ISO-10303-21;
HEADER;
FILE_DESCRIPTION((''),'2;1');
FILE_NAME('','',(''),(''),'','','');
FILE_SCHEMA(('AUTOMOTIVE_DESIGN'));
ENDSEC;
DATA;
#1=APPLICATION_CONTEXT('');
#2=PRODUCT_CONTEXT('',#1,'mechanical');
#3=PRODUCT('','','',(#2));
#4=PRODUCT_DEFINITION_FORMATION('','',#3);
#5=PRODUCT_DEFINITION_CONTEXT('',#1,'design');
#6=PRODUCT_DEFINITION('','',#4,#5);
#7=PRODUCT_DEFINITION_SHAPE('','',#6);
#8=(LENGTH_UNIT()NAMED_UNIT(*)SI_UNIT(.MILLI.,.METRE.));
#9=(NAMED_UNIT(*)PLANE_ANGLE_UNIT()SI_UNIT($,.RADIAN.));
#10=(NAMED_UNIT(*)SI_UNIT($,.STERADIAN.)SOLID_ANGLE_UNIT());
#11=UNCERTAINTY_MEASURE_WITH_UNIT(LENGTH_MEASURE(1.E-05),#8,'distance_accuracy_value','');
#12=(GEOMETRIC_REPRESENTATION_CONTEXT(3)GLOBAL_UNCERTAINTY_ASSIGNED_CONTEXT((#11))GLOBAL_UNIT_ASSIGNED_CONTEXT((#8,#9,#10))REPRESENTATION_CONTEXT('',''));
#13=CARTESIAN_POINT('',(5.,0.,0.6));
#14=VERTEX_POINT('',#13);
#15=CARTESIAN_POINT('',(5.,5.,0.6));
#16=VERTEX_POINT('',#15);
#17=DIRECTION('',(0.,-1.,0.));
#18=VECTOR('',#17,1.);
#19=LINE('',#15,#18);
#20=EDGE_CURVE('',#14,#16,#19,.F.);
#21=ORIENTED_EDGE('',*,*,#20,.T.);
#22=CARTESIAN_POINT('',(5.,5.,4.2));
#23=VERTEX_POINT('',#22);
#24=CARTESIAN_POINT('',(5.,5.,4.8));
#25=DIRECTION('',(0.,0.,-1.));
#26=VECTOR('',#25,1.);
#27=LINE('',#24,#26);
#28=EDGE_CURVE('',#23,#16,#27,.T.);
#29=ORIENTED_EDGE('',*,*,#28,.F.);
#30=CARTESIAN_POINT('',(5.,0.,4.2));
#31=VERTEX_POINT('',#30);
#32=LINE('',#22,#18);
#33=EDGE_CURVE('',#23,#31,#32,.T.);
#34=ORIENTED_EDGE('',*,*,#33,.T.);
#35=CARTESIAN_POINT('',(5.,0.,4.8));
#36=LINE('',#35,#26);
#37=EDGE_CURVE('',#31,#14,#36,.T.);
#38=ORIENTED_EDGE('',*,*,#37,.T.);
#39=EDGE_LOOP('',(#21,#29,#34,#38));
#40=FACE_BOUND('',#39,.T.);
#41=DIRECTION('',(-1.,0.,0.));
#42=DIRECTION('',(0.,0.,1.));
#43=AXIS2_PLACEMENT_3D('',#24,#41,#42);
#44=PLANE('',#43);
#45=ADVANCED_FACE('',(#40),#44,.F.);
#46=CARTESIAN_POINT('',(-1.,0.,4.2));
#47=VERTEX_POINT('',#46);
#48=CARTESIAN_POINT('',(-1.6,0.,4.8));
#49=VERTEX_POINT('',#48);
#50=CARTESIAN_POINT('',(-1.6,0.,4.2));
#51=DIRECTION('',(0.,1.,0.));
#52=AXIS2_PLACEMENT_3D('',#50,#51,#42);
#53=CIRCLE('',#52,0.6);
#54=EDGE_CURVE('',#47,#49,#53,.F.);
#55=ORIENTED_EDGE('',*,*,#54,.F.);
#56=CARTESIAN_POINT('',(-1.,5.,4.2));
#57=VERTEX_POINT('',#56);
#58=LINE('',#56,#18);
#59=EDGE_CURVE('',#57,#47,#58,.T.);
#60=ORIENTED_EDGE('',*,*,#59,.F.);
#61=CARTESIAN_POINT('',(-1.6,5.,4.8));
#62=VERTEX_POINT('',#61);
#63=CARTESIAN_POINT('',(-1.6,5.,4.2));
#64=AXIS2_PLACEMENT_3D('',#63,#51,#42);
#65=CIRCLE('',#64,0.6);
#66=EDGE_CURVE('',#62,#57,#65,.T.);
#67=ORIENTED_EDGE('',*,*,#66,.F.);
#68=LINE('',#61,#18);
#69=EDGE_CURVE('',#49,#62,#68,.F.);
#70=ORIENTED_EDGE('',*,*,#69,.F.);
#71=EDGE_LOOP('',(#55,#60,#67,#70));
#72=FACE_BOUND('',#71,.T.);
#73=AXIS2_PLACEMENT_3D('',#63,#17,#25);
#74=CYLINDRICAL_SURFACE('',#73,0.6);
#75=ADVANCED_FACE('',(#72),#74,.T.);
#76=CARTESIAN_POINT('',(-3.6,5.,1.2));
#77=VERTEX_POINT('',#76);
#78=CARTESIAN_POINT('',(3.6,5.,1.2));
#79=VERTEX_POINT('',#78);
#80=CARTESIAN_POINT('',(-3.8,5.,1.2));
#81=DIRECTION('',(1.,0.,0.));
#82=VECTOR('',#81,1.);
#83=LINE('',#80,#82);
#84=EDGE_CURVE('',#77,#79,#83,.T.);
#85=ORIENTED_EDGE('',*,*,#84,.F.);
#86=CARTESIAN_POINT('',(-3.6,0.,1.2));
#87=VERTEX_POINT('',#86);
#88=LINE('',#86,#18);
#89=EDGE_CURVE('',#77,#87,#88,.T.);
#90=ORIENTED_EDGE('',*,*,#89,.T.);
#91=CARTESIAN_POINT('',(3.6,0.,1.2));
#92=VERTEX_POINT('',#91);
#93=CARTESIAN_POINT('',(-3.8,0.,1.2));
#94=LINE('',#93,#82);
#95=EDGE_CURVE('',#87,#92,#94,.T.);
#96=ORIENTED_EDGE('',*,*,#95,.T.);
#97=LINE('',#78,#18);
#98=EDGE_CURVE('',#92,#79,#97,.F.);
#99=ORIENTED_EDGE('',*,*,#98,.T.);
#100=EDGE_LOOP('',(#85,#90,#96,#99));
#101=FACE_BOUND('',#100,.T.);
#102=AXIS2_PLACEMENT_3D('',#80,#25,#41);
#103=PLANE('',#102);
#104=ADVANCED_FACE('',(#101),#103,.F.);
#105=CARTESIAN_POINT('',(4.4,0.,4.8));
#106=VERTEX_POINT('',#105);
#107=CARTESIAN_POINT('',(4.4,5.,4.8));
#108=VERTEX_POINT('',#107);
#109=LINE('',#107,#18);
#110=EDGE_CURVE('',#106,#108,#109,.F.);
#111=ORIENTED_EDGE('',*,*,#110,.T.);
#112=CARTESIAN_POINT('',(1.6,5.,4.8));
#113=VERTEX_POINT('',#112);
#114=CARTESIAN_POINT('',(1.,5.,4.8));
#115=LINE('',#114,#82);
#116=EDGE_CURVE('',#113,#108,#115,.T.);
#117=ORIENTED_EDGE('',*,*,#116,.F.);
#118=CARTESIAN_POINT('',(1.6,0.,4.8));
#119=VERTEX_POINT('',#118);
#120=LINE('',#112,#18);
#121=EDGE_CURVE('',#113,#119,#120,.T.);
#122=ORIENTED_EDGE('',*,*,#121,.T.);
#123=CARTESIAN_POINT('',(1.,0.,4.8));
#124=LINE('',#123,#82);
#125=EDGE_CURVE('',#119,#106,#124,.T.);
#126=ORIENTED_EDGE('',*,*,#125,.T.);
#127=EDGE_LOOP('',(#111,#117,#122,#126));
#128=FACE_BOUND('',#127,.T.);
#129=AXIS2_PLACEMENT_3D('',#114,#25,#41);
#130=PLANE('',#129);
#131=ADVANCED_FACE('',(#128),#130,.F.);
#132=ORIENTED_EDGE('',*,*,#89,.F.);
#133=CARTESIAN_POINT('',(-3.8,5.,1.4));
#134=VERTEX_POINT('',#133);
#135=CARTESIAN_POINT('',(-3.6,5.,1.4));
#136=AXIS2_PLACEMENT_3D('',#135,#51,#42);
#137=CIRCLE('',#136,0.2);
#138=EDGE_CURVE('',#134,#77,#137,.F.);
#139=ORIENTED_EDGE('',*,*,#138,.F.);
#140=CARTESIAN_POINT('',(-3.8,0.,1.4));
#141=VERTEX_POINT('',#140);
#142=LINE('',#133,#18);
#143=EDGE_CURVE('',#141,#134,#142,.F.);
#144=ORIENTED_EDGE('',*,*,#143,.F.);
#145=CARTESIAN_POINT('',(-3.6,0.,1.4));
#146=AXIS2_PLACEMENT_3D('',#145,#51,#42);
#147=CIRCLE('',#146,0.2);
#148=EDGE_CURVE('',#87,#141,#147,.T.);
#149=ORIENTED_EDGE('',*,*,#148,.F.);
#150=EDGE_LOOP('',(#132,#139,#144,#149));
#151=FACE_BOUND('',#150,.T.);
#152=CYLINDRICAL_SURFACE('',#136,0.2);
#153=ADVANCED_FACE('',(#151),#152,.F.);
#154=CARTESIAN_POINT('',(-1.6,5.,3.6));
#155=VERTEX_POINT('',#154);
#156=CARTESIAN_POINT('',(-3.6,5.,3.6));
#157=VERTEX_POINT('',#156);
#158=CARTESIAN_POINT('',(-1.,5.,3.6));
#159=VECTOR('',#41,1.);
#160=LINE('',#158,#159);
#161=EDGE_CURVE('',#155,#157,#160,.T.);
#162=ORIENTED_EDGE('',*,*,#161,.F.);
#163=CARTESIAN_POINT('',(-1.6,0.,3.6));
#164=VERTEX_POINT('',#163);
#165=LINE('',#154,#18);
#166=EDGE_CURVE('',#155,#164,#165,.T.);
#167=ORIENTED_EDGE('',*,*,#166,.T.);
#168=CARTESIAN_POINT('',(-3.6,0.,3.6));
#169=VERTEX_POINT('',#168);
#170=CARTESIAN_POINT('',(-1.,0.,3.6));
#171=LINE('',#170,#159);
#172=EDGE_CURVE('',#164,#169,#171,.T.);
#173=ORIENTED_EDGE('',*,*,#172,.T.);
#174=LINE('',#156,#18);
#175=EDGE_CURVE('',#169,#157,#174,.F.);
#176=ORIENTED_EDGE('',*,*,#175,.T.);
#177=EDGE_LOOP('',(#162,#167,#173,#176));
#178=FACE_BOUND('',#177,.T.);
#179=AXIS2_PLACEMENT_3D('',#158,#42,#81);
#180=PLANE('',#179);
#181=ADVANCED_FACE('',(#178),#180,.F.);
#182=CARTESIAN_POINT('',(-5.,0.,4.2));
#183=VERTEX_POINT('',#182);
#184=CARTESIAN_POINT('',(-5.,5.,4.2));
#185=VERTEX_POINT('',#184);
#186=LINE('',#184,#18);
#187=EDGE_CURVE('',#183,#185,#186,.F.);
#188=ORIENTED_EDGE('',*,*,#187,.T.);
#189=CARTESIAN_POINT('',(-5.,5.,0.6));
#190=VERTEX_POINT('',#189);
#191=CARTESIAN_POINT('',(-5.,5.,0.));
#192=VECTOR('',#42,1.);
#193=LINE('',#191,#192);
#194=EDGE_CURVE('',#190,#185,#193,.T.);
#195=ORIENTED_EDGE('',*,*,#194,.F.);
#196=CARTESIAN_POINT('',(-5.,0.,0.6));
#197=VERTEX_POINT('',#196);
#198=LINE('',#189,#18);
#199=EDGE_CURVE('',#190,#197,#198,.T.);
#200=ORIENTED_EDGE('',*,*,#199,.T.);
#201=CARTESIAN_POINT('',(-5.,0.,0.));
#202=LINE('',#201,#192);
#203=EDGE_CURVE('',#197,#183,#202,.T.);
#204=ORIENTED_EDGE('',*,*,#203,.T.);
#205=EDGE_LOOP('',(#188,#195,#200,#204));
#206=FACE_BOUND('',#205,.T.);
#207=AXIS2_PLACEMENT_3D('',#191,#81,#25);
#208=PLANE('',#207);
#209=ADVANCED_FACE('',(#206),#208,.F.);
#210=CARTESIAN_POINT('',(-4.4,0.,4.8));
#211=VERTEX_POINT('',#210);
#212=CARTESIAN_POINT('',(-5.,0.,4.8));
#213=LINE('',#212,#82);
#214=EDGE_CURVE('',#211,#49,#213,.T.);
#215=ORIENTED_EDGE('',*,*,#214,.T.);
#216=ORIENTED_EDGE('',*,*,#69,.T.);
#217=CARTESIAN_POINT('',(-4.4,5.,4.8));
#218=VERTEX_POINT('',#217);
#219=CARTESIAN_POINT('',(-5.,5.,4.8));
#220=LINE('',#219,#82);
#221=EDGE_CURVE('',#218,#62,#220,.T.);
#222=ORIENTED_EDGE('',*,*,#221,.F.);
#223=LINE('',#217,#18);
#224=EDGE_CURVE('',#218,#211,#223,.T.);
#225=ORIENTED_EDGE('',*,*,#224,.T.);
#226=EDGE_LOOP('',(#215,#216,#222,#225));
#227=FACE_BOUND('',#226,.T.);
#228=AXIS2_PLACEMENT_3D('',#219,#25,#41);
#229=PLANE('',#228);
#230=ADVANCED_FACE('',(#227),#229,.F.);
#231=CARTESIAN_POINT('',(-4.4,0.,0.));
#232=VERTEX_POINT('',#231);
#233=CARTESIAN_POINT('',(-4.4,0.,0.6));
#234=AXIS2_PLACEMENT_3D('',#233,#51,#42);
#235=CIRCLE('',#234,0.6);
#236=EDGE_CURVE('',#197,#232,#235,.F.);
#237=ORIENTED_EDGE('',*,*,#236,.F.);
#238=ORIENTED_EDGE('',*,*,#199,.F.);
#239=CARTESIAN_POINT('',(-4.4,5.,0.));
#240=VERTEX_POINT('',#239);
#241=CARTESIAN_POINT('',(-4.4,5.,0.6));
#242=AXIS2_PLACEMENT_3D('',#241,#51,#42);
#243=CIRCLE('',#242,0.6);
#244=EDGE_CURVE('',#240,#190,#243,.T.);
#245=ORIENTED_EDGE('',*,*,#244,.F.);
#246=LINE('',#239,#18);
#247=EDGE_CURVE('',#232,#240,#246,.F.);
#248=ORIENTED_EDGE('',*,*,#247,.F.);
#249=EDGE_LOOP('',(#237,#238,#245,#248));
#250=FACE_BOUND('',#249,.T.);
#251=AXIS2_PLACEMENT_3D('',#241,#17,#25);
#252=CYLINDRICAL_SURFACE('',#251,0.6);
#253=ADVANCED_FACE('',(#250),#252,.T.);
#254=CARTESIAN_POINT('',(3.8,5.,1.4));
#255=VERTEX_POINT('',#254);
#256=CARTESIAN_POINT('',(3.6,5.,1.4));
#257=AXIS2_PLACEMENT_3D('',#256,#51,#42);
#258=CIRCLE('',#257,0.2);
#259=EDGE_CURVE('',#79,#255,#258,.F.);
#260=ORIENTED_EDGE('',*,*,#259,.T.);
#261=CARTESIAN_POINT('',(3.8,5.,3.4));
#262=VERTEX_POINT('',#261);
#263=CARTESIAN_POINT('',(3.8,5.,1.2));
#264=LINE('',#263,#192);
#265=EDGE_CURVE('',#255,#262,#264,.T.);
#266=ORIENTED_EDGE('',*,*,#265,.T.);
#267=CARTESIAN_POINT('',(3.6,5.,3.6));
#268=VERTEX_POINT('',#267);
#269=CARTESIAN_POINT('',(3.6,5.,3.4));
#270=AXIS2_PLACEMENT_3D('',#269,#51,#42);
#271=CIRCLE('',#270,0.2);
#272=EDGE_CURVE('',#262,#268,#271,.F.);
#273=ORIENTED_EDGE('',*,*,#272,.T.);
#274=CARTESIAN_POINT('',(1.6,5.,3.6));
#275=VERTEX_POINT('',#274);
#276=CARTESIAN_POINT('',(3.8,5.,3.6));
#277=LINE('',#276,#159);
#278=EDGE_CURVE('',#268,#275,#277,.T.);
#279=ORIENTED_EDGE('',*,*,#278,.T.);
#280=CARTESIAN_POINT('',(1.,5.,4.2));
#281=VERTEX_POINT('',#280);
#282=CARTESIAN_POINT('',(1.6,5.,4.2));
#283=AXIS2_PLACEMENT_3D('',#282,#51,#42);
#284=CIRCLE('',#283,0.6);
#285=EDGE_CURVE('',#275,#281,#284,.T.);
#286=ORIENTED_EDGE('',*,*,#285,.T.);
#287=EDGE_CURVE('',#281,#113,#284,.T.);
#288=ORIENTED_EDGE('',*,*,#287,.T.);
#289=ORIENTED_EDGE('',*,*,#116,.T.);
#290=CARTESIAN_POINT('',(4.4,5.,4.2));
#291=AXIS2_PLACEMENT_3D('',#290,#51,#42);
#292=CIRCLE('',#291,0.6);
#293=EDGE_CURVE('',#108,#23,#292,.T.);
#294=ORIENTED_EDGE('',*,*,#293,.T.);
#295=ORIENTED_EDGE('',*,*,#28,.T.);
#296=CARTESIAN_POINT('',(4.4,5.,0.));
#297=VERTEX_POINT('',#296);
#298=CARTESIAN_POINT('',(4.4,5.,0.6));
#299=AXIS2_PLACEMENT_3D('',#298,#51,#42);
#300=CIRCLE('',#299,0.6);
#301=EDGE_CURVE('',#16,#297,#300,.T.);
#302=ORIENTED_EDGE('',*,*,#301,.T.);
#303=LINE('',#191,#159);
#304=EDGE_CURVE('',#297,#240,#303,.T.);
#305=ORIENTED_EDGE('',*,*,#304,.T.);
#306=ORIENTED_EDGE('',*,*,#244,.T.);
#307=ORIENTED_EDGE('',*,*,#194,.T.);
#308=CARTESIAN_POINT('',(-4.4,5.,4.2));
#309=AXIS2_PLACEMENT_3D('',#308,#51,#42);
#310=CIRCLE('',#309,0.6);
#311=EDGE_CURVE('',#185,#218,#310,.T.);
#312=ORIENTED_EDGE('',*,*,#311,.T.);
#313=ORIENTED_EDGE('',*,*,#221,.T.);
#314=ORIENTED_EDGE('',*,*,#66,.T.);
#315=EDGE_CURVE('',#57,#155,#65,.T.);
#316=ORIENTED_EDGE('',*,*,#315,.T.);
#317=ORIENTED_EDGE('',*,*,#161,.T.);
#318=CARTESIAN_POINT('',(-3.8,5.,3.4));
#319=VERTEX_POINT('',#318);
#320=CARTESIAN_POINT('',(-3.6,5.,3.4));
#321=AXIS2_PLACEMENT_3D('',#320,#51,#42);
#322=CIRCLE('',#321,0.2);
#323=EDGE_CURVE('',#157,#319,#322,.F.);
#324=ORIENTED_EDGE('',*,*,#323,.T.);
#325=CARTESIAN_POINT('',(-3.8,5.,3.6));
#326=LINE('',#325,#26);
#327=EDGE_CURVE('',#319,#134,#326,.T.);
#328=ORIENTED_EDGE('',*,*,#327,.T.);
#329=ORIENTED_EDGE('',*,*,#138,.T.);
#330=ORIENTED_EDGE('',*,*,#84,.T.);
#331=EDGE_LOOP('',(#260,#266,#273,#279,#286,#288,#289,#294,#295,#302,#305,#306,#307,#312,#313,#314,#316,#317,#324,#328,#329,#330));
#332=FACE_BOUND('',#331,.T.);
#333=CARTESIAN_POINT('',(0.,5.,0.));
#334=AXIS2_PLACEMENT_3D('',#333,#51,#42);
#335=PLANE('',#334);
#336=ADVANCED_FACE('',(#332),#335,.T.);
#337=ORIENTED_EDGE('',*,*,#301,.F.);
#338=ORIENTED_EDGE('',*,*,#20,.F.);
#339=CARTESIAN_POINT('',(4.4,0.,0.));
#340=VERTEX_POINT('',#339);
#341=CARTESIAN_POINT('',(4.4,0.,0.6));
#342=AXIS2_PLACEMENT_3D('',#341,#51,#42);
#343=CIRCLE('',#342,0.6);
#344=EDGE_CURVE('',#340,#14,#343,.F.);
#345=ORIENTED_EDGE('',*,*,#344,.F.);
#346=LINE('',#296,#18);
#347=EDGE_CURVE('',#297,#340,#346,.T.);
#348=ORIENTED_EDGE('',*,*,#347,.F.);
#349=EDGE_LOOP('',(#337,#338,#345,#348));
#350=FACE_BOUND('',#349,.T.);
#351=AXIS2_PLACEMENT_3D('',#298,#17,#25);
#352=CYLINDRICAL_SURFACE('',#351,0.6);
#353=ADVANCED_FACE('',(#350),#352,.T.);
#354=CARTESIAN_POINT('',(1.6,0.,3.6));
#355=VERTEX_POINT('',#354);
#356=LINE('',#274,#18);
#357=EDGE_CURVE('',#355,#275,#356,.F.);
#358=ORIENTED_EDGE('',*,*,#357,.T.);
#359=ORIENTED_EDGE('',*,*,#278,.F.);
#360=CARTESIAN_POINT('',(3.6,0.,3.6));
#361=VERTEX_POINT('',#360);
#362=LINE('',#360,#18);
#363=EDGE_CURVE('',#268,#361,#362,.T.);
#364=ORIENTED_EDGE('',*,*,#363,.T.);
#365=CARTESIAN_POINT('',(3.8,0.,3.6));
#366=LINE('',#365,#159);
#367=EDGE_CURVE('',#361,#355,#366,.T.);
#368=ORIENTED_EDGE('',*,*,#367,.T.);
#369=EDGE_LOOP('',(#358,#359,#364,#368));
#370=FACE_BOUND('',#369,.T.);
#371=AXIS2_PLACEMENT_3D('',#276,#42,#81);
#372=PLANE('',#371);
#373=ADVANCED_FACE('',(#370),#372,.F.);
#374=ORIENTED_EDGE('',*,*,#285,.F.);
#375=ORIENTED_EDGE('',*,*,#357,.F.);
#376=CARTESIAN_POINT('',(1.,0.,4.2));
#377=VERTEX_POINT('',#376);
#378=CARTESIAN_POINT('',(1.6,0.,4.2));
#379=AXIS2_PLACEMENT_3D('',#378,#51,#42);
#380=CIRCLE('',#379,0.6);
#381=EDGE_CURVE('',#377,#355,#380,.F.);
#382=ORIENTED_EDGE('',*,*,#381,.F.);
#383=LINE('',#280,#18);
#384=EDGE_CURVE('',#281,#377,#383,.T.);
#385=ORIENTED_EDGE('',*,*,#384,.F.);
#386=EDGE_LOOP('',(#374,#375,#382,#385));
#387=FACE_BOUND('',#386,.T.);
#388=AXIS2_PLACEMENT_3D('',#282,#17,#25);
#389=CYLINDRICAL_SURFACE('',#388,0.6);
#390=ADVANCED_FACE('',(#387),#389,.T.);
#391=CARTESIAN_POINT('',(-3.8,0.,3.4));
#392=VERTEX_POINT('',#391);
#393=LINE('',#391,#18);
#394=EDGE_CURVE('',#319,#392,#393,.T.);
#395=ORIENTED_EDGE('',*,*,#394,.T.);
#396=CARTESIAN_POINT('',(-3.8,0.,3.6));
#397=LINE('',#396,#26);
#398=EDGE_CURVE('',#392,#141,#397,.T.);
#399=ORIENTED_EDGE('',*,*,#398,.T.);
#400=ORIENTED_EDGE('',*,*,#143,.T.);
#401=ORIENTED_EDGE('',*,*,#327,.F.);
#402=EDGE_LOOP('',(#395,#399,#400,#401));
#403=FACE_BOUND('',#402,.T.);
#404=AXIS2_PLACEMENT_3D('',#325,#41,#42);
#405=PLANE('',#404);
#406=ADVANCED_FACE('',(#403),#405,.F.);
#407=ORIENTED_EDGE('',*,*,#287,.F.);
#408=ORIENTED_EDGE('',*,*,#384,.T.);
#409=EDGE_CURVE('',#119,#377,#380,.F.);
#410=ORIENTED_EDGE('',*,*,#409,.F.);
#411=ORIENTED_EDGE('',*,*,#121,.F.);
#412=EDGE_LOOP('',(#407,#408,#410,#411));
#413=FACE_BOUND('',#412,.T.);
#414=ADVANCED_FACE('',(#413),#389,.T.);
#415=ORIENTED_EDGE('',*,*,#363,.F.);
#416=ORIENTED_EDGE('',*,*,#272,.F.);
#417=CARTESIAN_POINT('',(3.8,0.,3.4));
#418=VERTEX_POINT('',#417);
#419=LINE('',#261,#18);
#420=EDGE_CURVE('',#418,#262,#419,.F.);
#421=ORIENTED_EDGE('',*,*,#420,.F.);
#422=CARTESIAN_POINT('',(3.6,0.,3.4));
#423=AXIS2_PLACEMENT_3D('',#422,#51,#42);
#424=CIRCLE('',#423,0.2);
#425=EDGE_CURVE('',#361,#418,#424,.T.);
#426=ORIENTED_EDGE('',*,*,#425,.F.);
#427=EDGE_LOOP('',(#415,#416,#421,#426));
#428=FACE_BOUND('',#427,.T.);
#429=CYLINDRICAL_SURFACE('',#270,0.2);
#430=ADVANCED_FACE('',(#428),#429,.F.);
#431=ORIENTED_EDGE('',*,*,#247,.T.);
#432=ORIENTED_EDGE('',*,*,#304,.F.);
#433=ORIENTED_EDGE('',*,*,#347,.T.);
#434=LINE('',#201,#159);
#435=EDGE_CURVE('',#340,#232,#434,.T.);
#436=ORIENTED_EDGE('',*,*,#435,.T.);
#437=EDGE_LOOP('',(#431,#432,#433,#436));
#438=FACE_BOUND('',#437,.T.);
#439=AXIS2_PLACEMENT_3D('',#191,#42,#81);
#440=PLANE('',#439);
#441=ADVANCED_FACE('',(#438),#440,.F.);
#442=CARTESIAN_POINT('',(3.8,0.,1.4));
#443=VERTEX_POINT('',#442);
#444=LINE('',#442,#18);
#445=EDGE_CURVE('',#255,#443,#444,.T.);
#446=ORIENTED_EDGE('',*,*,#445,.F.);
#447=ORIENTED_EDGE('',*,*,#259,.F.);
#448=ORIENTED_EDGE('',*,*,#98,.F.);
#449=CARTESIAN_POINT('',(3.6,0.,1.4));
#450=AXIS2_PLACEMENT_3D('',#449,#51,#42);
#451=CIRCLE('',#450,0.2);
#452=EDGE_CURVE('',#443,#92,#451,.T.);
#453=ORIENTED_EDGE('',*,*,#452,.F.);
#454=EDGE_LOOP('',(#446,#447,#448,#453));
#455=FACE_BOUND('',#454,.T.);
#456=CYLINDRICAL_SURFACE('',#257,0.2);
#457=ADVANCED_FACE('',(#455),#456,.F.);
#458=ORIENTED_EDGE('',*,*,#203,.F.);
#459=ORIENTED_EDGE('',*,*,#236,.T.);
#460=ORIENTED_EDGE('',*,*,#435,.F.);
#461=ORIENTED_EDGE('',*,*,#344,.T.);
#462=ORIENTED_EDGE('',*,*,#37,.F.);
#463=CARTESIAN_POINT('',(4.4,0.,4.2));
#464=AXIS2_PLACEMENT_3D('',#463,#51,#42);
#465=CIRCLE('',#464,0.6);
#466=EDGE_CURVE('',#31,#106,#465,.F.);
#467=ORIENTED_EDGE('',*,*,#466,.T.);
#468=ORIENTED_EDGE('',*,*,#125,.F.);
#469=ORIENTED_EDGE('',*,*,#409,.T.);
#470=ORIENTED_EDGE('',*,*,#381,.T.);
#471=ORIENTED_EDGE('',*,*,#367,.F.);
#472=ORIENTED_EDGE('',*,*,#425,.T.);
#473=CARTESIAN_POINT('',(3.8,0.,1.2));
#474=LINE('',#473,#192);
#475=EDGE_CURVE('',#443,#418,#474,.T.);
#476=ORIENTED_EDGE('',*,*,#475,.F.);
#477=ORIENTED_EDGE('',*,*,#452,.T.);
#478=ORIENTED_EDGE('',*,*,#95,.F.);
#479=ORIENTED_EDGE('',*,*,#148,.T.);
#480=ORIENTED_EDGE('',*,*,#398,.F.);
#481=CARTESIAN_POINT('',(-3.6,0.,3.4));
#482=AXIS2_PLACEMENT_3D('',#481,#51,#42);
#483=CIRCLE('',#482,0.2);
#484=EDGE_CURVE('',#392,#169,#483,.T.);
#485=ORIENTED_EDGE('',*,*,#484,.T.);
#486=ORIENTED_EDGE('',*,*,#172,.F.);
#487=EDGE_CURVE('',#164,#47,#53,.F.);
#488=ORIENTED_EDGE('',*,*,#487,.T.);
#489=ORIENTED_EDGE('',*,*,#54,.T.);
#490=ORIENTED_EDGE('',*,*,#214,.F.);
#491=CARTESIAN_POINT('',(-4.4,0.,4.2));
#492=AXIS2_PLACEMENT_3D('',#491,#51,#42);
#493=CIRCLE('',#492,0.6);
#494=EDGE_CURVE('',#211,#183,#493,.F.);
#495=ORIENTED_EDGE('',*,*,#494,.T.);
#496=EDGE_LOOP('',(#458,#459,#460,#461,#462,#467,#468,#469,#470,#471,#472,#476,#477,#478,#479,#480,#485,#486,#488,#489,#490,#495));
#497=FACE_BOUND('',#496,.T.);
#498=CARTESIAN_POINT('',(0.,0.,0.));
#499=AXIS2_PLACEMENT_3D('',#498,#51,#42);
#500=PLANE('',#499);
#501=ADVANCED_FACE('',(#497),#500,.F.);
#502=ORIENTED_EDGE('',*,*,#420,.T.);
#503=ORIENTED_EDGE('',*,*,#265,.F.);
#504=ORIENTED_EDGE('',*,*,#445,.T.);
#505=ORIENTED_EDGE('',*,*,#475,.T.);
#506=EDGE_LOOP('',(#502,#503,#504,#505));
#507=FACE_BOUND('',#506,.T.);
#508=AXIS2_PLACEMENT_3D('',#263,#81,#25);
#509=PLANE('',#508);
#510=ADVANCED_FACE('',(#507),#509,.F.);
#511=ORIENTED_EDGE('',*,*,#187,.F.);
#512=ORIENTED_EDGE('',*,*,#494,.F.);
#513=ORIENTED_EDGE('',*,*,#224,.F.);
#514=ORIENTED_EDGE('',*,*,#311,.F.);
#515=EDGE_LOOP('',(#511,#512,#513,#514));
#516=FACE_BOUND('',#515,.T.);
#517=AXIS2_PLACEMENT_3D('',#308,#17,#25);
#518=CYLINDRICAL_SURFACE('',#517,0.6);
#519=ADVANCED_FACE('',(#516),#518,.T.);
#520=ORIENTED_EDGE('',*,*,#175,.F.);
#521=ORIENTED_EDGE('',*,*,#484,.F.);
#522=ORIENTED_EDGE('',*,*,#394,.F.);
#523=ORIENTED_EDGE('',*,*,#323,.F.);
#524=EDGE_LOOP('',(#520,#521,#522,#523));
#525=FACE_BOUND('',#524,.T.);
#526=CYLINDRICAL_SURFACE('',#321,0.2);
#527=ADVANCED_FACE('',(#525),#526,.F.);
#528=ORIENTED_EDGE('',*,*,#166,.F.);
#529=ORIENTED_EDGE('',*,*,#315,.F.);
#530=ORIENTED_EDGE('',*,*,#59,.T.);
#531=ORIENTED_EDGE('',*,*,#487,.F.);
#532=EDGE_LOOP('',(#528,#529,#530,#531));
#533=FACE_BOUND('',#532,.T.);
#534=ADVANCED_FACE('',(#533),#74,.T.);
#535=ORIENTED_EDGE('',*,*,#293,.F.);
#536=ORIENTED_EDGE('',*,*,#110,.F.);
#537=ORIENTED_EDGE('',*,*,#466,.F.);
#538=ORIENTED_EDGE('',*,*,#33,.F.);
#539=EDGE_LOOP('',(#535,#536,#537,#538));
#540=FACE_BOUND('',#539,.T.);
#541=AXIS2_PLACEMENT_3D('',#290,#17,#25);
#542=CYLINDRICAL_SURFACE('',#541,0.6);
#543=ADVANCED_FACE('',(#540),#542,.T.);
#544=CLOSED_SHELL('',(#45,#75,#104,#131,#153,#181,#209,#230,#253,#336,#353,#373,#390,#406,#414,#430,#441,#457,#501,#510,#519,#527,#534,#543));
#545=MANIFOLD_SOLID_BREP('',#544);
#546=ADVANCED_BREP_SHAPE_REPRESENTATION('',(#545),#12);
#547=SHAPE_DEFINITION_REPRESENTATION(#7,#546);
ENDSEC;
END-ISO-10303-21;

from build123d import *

# Parameters (mm, degrees)
BOSS_EXTRUDE1_DEPTH = 5
FILLET1_R           = 0.6
FILLET2_R           = 0.2


with BuildPart() as part:
    # Sketch1 → Boss-Extrude1 (new body)
    with BuildSketch(Plane(origin=(0, 0, 0), x_dir=(1, 0, 0), z_dir=(0, 1, 0))):
        Polygon((-5, 0), (5, 0), (5, -4.8), (1, -4.8), (1, -3.6), (3.8, -3.6), (3.8, -1.2), (-3.8, -1.2), (-3.8, -3.6), (-1, -3.6), (-1, -4.8), (-5, -4.8), align=None)
    extrude(amount=BOSS_EXTRUDE1_DEPTH)

    # Fillet1
    fillet1_edges = [part.edges().sort_by_distance(p)[0] for p in [
        (-5, 2.5, 0),
        (5, 2.5, 0),
        (5, 2.5, 4.8),
        (1, 2.5, 4.8),
        (1, 2.5, 3.6),
        (-1, 2.5, 3.6),
        (-1, 2.5, 4.8),
        (-5, 2.5, 4.8),
    ]]
    fillet(fillet1_edges, radius=FILLET1_R - 0.0001)  # a hair under: the kernel refuses the full size

    # Fillet2
    fillet2_edges = [part.edges().sort_by_distance(p)[0] for p in [
        (3.8, 2.5, 3.6),
        (3.8, 2.5, 1.2),
        (-3.8, 2.5, 1.2),
        (-3.8, 2.5, 3.6),
    ]]
    fillet(fillet2_edges, radius=FILLET2_R)


solid = part.part
